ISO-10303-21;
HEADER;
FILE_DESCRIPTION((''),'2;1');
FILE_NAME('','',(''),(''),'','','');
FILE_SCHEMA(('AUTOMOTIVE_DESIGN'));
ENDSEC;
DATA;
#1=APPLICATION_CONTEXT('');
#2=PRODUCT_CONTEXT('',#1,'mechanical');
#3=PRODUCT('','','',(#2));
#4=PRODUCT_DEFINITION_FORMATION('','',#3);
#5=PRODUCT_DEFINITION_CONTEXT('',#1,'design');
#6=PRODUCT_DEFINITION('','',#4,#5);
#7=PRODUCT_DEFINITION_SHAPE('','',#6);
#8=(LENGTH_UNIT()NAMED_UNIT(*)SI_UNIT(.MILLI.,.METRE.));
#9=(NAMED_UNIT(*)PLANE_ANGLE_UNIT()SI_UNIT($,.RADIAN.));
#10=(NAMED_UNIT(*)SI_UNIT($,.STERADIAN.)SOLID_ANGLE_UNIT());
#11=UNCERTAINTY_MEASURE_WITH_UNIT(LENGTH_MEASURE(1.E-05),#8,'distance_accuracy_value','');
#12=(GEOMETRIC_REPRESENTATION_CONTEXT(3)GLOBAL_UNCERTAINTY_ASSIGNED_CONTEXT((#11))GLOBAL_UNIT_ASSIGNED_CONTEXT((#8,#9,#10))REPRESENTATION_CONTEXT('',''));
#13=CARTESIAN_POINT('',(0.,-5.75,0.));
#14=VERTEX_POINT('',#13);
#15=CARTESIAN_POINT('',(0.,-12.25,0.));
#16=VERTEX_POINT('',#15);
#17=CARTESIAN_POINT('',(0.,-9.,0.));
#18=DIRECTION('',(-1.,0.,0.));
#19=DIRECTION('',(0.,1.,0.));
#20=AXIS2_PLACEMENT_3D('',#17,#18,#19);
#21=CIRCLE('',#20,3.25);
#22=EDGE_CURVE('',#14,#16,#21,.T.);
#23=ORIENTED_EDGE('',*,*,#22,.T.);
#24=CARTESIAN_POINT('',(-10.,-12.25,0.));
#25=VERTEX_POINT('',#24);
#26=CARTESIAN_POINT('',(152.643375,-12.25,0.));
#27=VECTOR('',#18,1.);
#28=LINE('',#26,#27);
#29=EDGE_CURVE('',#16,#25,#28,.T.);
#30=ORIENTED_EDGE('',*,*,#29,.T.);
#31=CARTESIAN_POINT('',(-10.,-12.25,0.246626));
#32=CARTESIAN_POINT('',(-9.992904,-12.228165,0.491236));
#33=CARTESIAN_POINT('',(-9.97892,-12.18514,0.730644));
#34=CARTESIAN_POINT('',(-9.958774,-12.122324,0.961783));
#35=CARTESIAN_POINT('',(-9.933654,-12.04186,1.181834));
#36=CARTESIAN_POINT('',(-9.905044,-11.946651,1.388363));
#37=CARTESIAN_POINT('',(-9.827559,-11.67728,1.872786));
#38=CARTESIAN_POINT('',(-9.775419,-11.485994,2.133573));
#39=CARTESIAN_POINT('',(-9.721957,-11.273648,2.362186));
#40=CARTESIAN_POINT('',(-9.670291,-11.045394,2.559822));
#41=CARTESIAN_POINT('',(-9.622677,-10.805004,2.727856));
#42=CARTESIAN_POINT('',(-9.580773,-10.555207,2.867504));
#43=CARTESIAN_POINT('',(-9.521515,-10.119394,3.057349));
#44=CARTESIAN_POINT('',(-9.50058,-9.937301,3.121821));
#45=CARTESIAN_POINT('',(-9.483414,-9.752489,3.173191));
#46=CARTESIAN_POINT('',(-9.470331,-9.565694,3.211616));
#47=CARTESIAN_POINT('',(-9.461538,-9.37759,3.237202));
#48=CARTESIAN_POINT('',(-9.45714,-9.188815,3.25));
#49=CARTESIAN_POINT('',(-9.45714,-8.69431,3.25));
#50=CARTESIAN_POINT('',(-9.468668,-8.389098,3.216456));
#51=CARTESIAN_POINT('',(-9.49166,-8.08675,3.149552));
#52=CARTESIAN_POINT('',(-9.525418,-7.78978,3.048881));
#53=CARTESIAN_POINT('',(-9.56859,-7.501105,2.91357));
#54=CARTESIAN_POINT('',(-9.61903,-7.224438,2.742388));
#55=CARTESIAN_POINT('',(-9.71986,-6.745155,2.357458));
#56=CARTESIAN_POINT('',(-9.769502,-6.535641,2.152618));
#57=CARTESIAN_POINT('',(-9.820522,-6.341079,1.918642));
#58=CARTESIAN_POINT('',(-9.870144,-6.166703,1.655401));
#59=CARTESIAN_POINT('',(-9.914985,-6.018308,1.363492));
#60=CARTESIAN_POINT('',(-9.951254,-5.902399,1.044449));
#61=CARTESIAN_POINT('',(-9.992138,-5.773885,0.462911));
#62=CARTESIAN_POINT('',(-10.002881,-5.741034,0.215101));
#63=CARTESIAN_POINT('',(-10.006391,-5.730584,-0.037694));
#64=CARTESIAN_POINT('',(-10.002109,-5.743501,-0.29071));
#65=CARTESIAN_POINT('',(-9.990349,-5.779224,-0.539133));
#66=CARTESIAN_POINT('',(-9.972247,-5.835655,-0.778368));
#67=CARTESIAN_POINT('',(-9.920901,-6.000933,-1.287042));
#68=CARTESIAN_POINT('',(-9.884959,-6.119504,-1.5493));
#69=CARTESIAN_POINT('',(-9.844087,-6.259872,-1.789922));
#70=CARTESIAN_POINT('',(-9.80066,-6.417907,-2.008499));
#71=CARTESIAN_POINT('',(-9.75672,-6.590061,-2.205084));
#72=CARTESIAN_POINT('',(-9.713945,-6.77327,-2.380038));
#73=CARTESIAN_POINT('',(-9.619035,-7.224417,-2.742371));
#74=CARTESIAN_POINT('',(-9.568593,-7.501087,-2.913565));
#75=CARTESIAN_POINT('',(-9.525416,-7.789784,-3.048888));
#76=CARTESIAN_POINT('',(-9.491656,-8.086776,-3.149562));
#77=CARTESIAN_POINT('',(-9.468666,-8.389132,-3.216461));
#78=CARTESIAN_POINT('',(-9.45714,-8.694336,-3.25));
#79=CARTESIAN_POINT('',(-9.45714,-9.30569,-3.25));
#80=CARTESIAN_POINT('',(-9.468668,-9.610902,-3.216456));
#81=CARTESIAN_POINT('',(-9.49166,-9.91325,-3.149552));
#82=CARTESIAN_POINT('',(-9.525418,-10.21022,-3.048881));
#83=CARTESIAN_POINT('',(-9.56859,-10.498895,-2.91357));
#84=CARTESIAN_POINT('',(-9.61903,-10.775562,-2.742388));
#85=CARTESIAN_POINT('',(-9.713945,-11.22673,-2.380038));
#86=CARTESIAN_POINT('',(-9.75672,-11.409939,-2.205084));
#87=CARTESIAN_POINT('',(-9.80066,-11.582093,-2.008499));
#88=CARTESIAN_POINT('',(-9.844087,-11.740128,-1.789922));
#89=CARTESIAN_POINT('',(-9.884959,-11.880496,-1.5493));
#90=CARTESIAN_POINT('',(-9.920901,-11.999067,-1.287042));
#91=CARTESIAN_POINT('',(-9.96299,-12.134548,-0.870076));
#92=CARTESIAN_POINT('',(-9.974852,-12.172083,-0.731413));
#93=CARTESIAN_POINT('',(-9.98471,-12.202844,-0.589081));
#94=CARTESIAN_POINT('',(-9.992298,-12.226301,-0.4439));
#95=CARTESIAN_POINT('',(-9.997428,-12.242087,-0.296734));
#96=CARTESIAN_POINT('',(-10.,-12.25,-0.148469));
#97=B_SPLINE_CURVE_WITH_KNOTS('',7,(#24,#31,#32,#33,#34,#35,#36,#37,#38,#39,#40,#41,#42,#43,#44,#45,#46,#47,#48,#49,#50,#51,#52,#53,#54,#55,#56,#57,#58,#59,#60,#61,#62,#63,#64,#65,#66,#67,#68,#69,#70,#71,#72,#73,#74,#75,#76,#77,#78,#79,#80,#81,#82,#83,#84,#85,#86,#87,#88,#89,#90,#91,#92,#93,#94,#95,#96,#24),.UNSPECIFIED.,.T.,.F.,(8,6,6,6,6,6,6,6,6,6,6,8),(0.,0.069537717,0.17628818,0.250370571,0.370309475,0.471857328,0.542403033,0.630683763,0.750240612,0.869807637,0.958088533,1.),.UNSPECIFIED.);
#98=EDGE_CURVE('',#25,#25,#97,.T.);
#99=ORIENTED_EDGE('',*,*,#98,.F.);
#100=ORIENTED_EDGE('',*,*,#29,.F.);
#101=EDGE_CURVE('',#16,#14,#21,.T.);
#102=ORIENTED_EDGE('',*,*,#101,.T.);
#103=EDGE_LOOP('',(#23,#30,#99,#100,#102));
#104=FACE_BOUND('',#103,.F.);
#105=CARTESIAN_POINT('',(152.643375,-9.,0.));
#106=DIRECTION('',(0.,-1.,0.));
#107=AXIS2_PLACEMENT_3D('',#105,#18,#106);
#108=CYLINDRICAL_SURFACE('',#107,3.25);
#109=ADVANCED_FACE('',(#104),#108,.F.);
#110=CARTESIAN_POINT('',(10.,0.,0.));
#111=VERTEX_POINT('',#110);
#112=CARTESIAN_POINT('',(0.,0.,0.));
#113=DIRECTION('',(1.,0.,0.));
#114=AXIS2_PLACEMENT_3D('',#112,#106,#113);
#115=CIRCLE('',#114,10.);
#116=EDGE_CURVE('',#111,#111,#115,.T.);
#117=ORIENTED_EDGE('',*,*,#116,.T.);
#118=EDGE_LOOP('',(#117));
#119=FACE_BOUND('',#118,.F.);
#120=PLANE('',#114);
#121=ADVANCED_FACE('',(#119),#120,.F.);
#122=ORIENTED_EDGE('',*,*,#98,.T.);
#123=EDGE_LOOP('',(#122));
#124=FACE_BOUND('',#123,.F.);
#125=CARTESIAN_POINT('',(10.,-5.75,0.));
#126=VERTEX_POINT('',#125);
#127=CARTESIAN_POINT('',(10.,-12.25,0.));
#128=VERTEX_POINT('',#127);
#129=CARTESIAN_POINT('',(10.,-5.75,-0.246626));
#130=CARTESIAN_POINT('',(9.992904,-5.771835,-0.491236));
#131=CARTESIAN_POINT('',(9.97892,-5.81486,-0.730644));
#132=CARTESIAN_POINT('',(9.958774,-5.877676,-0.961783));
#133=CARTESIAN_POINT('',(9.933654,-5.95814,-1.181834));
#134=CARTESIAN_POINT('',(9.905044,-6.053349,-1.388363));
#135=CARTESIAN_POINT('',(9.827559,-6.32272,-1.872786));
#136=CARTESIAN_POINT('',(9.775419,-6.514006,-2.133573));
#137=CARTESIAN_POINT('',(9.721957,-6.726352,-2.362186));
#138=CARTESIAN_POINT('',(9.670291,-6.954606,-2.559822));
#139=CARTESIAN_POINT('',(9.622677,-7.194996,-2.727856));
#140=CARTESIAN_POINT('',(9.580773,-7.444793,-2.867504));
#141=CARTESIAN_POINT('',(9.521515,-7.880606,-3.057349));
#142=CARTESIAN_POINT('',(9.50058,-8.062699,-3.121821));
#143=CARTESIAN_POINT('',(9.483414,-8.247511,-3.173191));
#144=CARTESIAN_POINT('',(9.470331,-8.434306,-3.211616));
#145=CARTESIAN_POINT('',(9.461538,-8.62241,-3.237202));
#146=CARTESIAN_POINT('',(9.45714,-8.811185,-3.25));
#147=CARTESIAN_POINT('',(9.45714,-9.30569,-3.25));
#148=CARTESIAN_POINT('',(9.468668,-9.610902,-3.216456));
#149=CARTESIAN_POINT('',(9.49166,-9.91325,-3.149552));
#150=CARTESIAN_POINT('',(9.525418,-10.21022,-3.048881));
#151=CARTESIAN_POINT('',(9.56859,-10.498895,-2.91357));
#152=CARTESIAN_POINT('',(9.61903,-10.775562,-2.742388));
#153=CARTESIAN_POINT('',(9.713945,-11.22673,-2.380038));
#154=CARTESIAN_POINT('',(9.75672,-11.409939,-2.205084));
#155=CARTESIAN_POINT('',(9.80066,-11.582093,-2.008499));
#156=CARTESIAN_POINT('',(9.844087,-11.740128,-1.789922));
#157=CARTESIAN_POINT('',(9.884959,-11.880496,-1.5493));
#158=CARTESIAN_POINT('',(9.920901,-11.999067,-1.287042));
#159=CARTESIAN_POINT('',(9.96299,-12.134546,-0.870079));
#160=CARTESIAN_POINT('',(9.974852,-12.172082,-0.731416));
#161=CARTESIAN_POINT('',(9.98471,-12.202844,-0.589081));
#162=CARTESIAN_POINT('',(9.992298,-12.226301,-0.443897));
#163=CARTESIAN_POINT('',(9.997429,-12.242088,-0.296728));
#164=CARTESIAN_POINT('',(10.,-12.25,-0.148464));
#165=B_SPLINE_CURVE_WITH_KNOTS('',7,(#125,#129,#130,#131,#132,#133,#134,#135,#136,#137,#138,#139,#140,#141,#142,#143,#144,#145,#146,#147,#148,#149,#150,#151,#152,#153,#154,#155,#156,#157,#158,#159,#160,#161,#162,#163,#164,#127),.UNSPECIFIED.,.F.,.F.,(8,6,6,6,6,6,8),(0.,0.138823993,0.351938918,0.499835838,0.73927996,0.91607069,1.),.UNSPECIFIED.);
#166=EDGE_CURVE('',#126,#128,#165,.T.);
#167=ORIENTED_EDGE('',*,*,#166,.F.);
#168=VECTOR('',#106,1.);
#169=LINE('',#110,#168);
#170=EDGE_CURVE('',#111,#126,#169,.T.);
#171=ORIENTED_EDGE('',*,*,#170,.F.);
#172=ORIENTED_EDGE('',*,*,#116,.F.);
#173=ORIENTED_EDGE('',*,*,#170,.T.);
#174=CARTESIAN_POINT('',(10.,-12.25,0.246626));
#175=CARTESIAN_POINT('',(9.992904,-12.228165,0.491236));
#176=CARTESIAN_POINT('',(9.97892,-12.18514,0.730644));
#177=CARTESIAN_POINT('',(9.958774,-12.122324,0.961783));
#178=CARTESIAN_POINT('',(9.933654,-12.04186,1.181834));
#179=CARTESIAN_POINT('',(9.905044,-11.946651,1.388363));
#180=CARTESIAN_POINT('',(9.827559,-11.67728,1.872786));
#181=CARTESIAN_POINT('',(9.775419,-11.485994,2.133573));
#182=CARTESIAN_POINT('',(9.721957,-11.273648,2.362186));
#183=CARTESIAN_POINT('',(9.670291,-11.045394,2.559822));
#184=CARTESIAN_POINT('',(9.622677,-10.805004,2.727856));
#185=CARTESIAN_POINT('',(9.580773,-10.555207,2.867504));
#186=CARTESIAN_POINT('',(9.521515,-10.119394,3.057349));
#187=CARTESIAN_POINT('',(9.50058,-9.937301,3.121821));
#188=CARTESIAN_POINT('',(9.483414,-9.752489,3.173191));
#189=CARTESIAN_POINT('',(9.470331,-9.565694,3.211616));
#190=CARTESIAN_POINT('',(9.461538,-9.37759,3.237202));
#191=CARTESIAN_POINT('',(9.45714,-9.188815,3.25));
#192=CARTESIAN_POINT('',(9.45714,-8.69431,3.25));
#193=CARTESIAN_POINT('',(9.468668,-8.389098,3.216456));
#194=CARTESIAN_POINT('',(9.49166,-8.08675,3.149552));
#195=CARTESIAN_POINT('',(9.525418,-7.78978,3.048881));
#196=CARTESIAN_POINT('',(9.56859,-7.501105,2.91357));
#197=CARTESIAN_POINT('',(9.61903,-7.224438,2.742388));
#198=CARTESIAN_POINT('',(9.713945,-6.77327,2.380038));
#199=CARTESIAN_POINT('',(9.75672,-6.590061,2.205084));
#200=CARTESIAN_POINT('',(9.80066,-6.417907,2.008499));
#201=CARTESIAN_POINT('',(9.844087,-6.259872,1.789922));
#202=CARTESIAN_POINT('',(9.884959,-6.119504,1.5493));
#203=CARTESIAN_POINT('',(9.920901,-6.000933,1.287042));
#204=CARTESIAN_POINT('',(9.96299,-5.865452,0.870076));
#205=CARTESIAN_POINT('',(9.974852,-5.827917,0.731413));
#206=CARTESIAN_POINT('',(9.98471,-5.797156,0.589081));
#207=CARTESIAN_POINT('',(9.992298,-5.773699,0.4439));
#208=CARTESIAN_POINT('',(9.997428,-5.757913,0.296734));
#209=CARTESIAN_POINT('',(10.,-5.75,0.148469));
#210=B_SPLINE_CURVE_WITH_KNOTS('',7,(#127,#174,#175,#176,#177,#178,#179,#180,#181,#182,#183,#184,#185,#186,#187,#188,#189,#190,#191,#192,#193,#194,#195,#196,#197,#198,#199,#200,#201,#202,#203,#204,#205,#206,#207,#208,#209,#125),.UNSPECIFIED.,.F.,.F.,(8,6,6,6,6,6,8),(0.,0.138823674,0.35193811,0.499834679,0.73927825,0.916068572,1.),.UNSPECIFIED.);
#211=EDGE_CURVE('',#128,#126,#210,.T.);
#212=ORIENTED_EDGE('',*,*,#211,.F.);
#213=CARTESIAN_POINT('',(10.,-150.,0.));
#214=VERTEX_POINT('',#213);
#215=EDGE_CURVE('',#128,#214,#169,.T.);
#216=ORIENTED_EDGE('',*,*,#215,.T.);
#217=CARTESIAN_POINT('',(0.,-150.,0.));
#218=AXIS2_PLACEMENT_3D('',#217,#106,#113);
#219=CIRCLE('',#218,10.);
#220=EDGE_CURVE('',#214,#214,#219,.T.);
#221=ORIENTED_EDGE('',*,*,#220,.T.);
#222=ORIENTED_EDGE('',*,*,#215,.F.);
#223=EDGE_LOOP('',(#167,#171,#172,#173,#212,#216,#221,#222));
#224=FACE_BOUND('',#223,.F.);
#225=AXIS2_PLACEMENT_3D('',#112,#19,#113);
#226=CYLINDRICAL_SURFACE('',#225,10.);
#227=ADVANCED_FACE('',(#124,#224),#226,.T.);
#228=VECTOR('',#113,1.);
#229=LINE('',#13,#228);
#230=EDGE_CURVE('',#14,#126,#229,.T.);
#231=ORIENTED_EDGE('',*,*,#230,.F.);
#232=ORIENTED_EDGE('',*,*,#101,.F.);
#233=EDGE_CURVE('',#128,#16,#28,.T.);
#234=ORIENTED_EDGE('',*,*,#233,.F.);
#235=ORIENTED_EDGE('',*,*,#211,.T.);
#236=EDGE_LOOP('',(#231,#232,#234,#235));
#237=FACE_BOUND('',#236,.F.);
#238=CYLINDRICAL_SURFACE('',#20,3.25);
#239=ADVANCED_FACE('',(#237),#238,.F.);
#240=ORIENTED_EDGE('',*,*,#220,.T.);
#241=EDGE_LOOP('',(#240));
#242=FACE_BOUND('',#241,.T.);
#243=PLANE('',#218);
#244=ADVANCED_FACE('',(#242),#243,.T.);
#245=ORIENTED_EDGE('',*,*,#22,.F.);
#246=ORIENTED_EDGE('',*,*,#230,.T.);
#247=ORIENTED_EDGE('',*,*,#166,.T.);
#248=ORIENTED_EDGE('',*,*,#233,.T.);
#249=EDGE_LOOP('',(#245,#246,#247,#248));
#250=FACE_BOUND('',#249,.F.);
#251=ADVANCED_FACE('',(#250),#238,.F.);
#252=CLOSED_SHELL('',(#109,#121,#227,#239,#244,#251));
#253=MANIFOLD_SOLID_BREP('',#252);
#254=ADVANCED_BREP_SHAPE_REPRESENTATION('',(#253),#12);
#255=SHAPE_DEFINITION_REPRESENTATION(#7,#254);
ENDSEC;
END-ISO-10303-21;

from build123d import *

# Parameters (mm, degrees)
F0_R     = 10
F1_DEPTH = 150
F4_D     = 6.5
F4_DEPTH = 10.001
F5_D     = 6.5


# Not quite as in the source:
# - a feature names something its author has since deleted; it is built from what else it names


with BuildPart() as f1:
    # F0 (on Front) → F1 (new body)
    with BuildSketch(Plane.XZ):
        Circle(F0_R)
    extrude(amount=F1_DEPTH)

    # F4 (through all, one way)
    with BuildSketch(Plane(origin=(0, 0, 0), x_dir=(0, 1, 0), z_dir=(-1, 0, 0))):
        with Locations((-9, 0)):
            Circle(F4_D / 2)
    extrude(amount=-F4_DEPTH, mode=Mode.SUBTRACT)

    # F5 (through all)
    with Locations(Plane.YZ):
        with Locations((-9, 0)):
            Hole(F5_D / 2)


solid = f1.part
